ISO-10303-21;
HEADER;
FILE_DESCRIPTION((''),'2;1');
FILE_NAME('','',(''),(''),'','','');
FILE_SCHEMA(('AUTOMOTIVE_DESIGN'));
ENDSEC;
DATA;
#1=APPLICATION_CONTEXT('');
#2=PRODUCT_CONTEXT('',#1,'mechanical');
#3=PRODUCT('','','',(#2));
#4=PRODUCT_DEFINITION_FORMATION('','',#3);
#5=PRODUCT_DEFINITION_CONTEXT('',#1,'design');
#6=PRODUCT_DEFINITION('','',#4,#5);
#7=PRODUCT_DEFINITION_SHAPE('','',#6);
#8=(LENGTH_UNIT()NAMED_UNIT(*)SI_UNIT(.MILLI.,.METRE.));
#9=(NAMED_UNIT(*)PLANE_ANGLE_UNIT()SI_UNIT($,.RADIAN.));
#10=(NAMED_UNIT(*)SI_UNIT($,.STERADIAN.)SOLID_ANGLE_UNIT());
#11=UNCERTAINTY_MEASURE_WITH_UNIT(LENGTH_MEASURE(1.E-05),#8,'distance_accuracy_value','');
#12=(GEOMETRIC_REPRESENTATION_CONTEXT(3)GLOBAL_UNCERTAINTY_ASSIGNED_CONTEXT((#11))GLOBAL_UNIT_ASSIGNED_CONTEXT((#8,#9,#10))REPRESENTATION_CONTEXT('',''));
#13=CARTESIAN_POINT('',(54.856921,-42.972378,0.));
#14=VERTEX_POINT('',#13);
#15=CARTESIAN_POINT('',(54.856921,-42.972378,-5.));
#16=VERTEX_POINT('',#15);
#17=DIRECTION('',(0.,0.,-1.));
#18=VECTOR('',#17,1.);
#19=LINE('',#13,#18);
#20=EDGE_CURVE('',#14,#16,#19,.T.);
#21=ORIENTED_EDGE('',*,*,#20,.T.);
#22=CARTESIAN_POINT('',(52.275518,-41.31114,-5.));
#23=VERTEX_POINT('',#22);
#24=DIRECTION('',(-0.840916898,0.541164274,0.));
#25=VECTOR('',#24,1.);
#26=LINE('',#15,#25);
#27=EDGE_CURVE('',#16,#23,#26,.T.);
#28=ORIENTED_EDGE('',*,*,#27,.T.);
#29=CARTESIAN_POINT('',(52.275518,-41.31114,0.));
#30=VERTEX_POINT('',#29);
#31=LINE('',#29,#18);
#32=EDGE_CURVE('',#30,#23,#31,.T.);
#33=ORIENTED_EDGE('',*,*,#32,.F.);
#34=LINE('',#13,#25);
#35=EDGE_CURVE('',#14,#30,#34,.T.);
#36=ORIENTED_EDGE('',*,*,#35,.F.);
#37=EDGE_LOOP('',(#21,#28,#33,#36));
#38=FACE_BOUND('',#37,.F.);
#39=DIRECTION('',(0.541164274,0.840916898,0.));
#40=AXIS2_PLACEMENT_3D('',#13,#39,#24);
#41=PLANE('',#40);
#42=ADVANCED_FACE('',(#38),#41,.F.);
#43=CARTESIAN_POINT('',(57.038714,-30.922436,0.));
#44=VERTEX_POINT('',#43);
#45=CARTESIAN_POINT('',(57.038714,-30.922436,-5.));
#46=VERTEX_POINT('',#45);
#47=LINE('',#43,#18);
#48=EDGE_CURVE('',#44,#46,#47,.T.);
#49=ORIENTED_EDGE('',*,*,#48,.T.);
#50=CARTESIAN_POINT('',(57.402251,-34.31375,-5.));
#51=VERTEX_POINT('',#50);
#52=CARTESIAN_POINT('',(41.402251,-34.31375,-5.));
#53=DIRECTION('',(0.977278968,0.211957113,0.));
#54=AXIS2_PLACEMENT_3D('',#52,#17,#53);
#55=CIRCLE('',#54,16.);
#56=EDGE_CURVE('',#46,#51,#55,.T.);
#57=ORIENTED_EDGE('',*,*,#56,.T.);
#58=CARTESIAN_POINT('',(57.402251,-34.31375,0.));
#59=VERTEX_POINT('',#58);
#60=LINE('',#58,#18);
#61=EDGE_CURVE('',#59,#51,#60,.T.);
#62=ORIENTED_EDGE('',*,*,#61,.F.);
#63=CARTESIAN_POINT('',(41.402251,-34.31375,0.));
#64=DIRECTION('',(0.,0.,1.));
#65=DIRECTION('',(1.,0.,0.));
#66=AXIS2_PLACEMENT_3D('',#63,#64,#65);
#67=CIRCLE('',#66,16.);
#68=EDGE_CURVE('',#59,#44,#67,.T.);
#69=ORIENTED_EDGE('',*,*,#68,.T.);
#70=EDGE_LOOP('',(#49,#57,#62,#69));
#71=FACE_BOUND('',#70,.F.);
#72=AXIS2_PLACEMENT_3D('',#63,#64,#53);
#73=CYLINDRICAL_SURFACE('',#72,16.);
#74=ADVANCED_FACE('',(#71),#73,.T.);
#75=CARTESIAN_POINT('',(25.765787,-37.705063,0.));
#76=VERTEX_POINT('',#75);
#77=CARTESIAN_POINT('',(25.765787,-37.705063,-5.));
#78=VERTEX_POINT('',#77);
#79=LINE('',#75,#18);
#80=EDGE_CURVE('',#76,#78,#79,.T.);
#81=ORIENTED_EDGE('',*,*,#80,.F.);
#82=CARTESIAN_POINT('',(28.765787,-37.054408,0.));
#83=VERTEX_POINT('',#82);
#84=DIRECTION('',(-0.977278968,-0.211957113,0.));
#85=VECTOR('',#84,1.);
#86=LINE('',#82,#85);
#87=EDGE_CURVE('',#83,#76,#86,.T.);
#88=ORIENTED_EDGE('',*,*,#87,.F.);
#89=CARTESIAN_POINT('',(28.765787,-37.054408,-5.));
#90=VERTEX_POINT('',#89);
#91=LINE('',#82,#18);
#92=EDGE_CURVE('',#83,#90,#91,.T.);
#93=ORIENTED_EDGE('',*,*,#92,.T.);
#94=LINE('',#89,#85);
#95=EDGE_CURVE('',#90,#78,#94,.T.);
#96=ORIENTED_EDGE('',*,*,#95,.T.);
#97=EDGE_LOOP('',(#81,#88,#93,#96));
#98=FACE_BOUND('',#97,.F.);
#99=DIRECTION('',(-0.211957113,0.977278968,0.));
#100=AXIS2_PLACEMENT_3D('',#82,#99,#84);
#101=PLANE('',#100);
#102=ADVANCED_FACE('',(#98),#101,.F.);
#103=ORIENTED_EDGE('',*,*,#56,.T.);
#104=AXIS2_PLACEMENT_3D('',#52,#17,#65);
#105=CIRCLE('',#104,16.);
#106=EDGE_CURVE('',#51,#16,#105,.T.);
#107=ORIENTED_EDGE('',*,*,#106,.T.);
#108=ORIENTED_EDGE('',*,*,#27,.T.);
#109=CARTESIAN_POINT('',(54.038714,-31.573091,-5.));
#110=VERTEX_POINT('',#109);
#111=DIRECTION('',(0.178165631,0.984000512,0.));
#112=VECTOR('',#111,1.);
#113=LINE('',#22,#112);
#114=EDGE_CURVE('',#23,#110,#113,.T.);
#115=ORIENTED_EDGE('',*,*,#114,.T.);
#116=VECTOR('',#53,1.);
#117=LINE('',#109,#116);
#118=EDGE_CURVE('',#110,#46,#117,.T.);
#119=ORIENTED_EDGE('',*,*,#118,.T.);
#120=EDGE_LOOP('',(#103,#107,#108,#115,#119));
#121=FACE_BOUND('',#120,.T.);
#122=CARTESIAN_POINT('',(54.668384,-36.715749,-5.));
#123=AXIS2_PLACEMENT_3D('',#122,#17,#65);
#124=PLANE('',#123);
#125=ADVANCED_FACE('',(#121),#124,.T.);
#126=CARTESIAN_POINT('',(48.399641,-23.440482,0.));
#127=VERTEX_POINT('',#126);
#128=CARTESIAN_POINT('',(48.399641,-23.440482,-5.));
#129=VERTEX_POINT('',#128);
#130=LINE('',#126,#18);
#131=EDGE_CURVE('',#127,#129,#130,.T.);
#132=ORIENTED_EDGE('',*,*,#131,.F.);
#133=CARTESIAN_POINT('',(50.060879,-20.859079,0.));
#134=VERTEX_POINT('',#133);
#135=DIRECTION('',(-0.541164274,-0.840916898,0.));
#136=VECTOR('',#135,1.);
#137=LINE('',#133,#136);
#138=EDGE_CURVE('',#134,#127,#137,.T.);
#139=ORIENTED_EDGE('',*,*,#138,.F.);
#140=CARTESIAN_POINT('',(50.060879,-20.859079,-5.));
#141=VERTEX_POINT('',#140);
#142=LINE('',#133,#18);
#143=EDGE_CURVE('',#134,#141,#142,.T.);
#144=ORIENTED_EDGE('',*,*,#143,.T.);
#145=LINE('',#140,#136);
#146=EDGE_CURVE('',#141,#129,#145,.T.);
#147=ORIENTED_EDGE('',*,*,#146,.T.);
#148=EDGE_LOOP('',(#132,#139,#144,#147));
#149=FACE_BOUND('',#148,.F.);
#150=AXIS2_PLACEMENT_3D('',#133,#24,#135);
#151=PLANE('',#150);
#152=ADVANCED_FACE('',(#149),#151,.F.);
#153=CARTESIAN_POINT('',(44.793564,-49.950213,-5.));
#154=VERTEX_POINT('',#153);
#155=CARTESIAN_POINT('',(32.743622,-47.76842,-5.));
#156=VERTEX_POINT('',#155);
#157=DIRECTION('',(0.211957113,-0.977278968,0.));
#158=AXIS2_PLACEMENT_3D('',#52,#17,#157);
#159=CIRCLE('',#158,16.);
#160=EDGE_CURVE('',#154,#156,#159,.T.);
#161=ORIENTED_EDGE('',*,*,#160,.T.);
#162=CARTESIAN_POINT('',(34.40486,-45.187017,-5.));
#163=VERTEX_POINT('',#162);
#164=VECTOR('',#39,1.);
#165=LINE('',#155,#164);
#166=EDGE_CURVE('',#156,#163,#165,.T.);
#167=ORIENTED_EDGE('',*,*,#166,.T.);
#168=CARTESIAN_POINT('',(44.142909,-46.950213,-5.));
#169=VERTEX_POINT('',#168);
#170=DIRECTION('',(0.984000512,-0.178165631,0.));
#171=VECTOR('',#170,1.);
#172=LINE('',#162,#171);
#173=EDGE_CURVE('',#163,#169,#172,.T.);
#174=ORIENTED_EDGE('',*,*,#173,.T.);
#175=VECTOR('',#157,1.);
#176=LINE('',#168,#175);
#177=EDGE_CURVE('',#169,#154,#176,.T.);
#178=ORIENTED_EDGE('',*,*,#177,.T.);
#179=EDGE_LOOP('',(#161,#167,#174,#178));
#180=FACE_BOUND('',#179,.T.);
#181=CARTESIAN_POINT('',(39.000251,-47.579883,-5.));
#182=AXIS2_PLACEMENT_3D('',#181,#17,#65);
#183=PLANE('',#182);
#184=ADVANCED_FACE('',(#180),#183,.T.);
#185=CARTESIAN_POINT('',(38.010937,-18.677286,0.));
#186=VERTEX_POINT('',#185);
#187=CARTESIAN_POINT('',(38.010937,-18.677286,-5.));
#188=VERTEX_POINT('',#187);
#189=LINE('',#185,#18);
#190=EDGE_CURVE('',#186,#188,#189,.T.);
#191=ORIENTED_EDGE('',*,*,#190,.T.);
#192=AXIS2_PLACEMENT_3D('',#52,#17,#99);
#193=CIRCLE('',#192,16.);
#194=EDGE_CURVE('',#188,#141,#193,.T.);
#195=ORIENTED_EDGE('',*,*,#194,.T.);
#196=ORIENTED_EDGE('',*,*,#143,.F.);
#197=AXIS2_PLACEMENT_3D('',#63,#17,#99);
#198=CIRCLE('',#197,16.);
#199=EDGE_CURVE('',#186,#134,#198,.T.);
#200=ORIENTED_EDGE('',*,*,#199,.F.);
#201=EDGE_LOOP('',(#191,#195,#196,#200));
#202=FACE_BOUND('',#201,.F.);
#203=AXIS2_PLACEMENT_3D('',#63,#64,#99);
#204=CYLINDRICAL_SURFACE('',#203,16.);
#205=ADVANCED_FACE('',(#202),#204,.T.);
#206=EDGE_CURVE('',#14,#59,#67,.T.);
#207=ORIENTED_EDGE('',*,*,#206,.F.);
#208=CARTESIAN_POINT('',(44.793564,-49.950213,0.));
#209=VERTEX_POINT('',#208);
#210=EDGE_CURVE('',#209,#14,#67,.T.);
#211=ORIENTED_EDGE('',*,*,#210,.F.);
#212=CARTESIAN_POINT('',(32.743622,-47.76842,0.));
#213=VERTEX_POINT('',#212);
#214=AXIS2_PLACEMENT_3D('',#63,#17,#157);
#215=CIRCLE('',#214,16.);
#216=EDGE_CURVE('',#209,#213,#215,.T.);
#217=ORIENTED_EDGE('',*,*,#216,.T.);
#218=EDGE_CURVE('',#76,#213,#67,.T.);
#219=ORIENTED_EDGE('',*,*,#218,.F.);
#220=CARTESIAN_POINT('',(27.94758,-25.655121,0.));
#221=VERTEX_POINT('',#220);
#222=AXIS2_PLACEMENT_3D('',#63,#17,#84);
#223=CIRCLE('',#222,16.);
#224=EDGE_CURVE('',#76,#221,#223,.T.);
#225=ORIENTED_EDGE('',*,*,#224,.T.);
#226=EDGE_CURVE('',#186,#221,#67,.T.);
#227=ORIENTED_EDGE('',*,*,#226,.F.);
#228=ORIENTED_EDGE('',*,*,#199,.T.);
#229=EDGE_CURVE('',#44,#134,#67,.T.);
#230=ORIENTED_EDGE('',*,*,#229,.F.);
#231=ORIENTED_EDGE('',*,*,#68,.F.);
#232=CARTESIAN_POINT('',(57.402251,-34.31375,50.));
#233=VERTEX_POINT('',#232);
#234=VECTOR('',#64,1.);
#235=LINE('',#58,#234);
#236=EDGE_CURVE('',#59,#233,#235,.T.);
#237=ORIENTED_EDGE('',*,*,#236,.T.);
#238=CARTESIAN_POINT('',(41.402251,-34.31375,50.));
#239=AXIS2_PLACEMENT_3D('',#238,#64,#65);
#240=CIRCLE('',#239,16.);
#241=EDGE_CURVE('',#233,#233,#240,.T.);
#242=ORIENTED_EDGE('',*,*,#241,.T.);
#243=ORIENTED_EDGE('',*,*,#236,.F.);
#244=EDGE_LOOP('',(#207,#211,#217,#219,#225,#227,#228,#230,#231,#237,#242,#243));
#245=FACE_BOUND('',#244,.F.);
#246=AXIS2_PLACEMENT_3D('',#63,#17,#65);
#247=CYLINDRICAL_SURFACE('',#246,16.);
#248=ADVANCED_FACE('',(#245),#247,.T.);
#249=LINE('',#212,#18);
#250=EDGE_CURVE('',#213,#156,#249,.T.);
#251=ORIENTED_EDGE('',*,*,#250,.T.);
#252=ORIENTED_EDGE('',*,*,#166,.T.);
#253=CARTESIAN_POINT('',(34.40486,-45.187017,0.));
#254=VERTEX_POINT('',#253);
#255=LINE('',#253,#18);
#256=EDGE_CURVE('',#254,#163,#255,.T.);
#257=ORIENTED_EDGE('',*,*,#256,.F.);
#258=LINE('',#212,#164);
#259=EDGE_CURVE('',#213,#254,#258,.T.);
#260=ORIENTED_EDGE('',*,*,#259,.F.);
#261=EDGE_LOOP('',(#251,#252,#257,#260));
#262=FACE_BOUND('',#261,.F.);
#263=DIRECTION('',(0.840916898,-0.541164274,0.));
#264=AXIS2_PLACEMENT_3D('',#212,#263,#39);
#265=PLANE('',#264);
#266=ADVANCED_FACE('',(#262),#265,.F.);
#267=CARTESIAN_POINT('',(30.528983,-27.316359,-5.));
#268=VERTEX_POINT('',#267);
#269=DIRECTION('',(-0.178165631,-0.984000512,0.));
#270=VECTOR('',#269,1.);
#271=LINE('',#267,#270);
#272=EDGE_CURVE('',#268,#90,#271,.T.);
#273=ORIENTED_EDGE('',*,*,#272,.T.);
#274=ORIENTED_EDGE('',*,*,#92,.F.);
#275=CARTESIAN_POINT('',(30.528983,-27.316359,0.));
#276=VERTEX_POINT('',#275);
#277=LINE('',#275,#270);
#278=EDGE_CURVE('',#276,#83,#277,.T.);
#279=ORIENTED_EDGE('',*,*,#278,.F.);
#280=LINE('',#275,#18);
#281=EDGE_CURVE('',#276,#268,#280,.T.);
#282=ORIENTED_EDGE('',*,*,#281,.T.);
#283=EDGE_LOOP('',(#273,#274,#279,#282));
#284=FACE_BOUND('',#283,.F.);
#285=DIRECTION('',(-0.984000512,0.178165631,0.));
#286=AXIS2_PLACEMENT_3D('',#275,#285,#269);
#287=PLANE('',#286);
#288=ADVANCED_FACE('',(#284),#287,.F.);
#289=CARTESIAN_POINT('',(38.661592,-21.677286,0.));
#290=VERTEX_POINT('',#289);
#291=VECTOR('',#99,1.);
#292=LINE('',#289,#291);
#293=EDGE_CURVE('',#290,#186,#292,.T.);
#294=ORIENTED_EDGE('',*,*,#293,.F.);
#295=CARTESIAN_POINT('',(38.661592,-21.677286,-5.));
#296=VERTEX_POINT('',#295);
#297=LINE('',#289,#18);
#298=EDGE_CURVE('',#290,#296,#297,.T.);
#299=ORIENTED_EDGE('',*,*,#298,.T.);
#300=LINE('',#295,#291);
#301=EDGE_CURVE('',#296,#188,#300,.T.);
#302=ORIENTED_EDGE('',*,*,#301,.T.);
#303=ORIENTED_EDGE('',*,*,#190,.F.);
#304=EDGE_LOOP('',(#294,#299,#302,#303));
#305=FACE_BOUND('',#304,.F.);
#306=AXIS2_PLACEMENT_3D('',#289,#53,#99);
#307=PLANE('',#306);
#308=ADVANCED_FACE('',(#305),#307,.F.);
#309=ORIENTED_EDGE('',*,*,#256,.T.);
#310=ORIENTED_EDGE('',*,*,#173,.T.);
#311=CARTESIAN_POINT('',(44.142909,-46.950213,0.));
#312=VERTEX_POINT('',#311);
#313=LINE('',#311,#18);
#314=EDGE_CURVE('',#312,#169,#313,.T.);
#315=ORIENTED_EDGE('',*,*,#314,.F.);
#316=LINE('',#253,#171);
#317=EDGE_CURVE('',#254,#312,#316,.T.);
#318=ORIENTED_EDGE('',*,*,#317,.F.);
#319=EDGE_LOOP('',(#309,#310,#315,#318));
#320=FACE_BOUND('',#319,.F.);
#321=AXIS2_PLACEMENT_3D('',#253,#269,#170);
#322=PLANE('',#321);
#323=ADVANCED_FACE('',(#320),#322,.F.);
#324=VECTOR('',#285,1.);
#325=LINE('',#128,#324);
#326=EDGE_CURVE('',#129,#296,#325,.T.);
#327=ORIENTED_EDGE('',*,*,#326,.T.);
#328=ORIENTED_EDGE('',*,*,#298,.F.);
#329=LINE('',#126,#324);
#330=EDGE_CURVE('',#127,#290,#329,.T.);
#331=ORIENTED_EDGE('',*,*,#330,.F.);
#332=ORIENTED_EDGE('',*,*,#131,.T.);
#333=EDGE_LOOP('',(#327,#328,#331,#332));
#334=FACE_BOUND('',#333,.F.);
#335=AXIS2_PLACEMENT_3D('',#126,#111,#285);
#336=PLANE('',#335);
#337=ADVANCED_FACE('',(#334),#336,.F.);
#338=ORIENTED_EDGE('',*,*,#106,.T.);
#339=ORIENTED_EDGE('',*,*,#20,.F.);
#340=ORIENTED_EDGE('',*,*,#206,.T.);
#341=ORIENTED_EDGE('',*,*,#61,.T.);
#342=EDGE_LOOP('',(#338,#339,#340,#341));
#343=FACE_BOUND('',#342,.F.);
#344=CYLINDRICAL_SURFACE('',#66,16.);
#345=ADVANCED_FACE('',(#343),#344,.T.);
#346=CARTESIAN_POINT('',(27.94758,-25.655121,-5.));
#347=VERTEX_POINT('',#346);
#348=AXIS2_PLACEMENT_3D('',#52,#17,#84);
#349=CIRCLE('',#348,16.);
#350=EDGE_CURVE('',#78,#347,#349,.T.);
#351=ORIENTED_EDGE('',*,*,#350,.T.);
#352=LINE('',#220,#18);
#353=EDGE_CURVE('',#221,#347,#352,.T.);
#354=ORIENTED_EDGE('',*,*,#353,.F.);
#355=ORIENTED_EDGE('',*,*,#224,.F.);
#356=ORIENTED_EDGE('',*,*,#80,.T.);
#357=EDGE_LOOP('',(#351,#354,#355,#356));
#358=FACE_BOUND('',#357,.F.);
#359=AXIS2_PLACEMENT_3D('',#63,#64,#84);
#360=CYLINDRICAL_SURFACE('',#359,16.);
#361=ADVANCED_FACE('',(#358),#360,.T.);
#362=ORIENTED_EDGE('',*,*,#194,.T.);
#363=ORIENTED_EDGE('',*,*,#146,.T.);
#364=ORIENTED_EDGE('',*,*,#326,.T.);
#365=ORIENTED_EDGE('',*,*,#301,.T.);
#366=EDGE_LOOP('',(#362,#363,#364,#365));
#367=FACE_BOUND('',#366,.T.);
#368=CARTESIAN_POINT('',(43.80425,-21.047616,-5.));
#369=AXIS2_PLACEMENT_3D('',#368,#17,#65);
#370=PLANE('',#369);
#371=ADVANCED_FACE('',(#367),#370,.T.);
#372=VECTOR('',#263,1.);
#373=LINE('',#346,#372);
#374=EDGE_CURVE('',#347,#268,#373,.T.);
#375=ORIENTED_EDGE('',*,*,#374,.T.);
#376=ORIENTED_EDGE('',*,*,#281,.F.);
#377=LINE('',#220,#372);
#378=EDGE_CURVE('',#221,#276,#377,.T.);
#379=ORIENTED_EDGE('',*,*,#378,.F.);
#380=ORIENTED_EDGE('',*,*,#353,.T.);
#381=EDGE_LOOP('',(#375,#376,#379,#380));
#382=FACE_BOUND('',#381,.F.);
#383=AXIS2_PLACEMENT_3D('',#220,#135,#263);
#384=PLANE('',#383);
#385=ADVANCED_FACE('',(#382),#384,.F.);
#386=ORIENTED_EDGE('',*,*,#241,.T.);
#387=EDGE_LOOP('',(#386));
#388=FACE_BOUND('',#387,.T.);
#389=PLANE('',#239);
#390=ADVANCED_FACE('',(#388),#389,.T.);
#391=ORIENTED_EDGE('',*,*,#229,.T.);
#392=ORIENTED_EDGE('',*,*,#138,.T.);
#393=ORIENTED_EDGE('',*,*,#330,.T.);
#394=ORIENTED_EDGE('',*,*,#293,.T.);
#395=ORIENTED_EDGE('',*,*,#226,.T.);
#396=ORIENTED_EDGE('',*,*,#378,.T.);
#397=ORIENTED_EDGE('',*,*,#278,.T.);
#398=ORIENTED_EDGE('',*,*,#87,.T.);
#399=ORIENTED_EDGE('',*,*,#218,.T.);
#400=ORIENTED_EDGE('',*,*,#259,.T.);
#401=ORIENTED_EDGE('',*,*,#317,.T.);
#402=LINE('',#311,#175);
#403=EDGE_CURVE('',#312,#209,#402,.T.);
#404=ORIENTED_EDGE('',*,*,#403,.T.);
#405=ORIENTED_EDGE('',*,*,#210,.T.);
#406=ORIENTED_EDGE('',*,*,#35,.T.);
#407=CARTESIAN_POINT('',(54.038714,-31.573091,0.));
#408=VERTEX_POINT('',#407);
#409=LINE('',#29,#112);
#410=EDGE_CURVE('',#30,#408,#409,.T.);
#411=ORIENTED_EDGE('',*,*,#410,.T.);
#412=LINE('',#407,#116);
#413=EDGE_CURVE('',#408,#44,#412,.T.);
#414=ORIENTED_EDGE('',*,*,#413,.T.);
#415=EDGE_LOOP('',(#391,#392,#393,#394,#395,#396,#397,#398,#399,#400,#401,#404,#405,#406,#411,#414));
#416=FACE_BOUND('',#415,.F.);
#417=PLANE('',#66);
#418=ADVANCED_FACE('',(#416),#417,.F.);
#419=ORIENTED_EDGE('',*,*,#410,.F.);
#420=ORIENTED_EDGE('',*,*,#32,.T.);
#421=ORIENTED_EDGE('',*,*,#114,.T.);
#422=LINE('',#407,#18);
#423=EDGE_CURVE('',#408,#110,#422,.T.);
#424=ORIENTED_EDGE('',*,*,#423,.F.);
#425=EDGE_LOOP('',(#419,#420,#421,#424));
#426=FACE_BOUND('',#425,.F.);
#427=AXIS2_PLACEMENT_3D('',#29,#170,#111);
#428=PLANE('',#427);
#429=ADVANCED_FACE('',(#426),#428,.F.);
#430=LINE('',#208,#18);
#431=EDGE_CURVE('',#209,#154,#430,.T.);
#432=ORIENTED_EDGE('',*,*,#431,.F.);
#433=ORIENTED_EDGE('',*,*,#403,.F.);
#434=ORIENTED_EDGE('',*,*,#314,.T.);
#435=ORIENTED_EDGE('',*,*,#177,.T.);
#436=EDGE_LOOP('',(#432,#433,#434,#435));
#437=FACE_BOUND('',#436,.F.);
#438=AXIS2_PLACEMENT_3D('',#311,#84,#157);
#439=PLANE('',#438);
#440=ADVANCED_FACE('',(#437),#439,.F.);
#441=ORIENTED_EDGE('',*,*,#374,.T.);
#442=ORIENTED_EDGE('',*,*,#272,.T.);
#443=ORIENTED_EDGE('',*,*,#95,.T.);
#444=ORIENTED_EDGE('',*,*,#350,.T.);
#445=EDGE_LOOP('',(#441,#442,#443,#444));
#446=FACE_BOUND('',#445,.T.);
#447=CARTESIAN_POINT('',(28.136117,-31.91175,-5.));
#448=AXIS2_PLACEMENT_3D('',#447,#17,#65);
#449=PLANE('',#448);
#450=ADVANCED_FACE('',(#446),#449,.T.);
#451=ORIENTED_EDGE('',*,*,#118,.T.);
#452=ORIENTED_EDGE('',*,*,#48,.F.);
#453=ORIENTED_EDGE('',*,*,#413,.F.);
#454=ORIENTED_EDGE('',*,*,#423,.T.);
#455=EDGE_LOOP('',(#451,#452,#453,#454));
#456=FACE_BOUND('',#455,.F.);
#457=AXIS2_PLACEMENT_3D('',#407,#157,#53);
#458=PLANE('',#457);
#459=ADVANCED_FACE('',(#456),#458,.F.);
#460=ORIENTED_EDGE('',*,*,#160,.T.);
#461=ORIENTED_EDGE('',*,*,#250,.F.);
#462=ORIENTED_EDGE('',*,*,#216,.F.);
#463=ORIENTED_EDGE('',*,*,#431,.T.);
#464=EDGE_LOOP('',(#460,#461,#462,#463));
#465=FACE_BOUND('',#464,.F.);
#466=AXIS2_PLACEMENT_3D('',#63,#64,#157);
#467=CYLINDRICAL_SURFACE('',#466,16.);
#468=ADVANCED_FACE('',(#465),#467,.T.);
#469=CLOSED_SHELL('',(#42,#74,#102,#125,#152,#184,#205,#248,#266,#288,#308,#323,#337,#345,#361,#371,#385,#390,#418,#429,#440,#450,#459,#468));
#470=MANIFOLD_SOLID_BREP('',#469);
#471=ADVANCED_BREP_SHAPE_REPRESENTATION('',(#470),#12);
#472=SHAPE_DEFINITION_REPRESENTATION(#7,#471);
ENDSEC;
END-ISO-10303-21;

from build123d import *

# Parameters (mm, degrees)
F0_R     = 16
F1_DEPTH = 50
F3_DEPTH = 5


# Not quite as in the source:
# - after a boolean that leaves OpenCascade's solid faulty, fix() repairs it


with BuildPart() as f1:
    # F0 (on Top) → F1 (new body)
    with BuildSketch(Plane.XY):
        with Locations((41.4022505283, -34.313749522)):
            Circle(F0_R)
    extrude(amount=F1_DEPTH)

    # F2 (on face) → F3 (join)
    with BuildSketch(Plane(origin=(0, 0, 0), x_dir=(1, 0, 0), z_dir=(0, 0, -1))):
        Polygon((57.0387140238, 30.9224357125), (54.8569208916, 42.9723779016), (52.2755180634, 41.3111400427), (54.0387140238, 31.573090602), align=None)
        with BuildLine():
            ThreePointArc((57.0387140238, 30.9224357125), (57.3111068029, 32.6083779976), (57.4022505283, 34.313749522))
            ThreePointArc((57.4022505283, 34.313749522), (56.7527346544, 38.8262473994), (54.8569208916, 42.9723779016))
            Line((54.8569208916, 42.9723779016), (57.0387140238, 30.9224357125))
        make_face()
        Polygon((38.0109367189, 18.6772860265), (50.060878908, 20.8590791587), (48.399641049, 23.4404819869), (38.6615916084, 21.6772860265), align=None)
        with BuildLine():
            ThreePointArc((38.0109367189, 18.6772860265), (44.252900632, 18.5697413288), (50.060878908, 20.8590791587))
            Line((50.060878908, 20.8590791587), (38.0109367189, 18.6772860265))
        make_face()
        Polygon((28.7657870328, 37.0544084419), (25.7657870328, 37.7050633314), (27.9475801651, 25.6551211423), (30.5289829933, 27.3163590013), align=None)
        with BuildLine():
            Line((27.9475801651, 25.6551211423), (25.7657870328, 37.7050633314))
            ThreePointArc((25.7657870328, 37.7050633314), (25.6582423352, 31.4630994183), (27.9475801651, 25.6551211423))
        make_face()
        Polygon((44.1429094483, 46.9502130175), (44.7935643378, 49.9502130175), (32.7436221487, 47.7684198852), (34.4048600077, 45.187017057), align=None)
        with BuildLine():
            Line((32.7436221487, 47.7684198852), (44.7935643378, 49.9502130175))
            ThreePointArc((44.7935643378, 49.9502130175), (38.5516004247, 50.0577577151), (32.7436221487, 47.7684198852))
        make_face()
    extrude(amount=F3_DEPTH)

    add(f1.part.fix(), mode=Mode.REPLACE)


solid = f1.part
